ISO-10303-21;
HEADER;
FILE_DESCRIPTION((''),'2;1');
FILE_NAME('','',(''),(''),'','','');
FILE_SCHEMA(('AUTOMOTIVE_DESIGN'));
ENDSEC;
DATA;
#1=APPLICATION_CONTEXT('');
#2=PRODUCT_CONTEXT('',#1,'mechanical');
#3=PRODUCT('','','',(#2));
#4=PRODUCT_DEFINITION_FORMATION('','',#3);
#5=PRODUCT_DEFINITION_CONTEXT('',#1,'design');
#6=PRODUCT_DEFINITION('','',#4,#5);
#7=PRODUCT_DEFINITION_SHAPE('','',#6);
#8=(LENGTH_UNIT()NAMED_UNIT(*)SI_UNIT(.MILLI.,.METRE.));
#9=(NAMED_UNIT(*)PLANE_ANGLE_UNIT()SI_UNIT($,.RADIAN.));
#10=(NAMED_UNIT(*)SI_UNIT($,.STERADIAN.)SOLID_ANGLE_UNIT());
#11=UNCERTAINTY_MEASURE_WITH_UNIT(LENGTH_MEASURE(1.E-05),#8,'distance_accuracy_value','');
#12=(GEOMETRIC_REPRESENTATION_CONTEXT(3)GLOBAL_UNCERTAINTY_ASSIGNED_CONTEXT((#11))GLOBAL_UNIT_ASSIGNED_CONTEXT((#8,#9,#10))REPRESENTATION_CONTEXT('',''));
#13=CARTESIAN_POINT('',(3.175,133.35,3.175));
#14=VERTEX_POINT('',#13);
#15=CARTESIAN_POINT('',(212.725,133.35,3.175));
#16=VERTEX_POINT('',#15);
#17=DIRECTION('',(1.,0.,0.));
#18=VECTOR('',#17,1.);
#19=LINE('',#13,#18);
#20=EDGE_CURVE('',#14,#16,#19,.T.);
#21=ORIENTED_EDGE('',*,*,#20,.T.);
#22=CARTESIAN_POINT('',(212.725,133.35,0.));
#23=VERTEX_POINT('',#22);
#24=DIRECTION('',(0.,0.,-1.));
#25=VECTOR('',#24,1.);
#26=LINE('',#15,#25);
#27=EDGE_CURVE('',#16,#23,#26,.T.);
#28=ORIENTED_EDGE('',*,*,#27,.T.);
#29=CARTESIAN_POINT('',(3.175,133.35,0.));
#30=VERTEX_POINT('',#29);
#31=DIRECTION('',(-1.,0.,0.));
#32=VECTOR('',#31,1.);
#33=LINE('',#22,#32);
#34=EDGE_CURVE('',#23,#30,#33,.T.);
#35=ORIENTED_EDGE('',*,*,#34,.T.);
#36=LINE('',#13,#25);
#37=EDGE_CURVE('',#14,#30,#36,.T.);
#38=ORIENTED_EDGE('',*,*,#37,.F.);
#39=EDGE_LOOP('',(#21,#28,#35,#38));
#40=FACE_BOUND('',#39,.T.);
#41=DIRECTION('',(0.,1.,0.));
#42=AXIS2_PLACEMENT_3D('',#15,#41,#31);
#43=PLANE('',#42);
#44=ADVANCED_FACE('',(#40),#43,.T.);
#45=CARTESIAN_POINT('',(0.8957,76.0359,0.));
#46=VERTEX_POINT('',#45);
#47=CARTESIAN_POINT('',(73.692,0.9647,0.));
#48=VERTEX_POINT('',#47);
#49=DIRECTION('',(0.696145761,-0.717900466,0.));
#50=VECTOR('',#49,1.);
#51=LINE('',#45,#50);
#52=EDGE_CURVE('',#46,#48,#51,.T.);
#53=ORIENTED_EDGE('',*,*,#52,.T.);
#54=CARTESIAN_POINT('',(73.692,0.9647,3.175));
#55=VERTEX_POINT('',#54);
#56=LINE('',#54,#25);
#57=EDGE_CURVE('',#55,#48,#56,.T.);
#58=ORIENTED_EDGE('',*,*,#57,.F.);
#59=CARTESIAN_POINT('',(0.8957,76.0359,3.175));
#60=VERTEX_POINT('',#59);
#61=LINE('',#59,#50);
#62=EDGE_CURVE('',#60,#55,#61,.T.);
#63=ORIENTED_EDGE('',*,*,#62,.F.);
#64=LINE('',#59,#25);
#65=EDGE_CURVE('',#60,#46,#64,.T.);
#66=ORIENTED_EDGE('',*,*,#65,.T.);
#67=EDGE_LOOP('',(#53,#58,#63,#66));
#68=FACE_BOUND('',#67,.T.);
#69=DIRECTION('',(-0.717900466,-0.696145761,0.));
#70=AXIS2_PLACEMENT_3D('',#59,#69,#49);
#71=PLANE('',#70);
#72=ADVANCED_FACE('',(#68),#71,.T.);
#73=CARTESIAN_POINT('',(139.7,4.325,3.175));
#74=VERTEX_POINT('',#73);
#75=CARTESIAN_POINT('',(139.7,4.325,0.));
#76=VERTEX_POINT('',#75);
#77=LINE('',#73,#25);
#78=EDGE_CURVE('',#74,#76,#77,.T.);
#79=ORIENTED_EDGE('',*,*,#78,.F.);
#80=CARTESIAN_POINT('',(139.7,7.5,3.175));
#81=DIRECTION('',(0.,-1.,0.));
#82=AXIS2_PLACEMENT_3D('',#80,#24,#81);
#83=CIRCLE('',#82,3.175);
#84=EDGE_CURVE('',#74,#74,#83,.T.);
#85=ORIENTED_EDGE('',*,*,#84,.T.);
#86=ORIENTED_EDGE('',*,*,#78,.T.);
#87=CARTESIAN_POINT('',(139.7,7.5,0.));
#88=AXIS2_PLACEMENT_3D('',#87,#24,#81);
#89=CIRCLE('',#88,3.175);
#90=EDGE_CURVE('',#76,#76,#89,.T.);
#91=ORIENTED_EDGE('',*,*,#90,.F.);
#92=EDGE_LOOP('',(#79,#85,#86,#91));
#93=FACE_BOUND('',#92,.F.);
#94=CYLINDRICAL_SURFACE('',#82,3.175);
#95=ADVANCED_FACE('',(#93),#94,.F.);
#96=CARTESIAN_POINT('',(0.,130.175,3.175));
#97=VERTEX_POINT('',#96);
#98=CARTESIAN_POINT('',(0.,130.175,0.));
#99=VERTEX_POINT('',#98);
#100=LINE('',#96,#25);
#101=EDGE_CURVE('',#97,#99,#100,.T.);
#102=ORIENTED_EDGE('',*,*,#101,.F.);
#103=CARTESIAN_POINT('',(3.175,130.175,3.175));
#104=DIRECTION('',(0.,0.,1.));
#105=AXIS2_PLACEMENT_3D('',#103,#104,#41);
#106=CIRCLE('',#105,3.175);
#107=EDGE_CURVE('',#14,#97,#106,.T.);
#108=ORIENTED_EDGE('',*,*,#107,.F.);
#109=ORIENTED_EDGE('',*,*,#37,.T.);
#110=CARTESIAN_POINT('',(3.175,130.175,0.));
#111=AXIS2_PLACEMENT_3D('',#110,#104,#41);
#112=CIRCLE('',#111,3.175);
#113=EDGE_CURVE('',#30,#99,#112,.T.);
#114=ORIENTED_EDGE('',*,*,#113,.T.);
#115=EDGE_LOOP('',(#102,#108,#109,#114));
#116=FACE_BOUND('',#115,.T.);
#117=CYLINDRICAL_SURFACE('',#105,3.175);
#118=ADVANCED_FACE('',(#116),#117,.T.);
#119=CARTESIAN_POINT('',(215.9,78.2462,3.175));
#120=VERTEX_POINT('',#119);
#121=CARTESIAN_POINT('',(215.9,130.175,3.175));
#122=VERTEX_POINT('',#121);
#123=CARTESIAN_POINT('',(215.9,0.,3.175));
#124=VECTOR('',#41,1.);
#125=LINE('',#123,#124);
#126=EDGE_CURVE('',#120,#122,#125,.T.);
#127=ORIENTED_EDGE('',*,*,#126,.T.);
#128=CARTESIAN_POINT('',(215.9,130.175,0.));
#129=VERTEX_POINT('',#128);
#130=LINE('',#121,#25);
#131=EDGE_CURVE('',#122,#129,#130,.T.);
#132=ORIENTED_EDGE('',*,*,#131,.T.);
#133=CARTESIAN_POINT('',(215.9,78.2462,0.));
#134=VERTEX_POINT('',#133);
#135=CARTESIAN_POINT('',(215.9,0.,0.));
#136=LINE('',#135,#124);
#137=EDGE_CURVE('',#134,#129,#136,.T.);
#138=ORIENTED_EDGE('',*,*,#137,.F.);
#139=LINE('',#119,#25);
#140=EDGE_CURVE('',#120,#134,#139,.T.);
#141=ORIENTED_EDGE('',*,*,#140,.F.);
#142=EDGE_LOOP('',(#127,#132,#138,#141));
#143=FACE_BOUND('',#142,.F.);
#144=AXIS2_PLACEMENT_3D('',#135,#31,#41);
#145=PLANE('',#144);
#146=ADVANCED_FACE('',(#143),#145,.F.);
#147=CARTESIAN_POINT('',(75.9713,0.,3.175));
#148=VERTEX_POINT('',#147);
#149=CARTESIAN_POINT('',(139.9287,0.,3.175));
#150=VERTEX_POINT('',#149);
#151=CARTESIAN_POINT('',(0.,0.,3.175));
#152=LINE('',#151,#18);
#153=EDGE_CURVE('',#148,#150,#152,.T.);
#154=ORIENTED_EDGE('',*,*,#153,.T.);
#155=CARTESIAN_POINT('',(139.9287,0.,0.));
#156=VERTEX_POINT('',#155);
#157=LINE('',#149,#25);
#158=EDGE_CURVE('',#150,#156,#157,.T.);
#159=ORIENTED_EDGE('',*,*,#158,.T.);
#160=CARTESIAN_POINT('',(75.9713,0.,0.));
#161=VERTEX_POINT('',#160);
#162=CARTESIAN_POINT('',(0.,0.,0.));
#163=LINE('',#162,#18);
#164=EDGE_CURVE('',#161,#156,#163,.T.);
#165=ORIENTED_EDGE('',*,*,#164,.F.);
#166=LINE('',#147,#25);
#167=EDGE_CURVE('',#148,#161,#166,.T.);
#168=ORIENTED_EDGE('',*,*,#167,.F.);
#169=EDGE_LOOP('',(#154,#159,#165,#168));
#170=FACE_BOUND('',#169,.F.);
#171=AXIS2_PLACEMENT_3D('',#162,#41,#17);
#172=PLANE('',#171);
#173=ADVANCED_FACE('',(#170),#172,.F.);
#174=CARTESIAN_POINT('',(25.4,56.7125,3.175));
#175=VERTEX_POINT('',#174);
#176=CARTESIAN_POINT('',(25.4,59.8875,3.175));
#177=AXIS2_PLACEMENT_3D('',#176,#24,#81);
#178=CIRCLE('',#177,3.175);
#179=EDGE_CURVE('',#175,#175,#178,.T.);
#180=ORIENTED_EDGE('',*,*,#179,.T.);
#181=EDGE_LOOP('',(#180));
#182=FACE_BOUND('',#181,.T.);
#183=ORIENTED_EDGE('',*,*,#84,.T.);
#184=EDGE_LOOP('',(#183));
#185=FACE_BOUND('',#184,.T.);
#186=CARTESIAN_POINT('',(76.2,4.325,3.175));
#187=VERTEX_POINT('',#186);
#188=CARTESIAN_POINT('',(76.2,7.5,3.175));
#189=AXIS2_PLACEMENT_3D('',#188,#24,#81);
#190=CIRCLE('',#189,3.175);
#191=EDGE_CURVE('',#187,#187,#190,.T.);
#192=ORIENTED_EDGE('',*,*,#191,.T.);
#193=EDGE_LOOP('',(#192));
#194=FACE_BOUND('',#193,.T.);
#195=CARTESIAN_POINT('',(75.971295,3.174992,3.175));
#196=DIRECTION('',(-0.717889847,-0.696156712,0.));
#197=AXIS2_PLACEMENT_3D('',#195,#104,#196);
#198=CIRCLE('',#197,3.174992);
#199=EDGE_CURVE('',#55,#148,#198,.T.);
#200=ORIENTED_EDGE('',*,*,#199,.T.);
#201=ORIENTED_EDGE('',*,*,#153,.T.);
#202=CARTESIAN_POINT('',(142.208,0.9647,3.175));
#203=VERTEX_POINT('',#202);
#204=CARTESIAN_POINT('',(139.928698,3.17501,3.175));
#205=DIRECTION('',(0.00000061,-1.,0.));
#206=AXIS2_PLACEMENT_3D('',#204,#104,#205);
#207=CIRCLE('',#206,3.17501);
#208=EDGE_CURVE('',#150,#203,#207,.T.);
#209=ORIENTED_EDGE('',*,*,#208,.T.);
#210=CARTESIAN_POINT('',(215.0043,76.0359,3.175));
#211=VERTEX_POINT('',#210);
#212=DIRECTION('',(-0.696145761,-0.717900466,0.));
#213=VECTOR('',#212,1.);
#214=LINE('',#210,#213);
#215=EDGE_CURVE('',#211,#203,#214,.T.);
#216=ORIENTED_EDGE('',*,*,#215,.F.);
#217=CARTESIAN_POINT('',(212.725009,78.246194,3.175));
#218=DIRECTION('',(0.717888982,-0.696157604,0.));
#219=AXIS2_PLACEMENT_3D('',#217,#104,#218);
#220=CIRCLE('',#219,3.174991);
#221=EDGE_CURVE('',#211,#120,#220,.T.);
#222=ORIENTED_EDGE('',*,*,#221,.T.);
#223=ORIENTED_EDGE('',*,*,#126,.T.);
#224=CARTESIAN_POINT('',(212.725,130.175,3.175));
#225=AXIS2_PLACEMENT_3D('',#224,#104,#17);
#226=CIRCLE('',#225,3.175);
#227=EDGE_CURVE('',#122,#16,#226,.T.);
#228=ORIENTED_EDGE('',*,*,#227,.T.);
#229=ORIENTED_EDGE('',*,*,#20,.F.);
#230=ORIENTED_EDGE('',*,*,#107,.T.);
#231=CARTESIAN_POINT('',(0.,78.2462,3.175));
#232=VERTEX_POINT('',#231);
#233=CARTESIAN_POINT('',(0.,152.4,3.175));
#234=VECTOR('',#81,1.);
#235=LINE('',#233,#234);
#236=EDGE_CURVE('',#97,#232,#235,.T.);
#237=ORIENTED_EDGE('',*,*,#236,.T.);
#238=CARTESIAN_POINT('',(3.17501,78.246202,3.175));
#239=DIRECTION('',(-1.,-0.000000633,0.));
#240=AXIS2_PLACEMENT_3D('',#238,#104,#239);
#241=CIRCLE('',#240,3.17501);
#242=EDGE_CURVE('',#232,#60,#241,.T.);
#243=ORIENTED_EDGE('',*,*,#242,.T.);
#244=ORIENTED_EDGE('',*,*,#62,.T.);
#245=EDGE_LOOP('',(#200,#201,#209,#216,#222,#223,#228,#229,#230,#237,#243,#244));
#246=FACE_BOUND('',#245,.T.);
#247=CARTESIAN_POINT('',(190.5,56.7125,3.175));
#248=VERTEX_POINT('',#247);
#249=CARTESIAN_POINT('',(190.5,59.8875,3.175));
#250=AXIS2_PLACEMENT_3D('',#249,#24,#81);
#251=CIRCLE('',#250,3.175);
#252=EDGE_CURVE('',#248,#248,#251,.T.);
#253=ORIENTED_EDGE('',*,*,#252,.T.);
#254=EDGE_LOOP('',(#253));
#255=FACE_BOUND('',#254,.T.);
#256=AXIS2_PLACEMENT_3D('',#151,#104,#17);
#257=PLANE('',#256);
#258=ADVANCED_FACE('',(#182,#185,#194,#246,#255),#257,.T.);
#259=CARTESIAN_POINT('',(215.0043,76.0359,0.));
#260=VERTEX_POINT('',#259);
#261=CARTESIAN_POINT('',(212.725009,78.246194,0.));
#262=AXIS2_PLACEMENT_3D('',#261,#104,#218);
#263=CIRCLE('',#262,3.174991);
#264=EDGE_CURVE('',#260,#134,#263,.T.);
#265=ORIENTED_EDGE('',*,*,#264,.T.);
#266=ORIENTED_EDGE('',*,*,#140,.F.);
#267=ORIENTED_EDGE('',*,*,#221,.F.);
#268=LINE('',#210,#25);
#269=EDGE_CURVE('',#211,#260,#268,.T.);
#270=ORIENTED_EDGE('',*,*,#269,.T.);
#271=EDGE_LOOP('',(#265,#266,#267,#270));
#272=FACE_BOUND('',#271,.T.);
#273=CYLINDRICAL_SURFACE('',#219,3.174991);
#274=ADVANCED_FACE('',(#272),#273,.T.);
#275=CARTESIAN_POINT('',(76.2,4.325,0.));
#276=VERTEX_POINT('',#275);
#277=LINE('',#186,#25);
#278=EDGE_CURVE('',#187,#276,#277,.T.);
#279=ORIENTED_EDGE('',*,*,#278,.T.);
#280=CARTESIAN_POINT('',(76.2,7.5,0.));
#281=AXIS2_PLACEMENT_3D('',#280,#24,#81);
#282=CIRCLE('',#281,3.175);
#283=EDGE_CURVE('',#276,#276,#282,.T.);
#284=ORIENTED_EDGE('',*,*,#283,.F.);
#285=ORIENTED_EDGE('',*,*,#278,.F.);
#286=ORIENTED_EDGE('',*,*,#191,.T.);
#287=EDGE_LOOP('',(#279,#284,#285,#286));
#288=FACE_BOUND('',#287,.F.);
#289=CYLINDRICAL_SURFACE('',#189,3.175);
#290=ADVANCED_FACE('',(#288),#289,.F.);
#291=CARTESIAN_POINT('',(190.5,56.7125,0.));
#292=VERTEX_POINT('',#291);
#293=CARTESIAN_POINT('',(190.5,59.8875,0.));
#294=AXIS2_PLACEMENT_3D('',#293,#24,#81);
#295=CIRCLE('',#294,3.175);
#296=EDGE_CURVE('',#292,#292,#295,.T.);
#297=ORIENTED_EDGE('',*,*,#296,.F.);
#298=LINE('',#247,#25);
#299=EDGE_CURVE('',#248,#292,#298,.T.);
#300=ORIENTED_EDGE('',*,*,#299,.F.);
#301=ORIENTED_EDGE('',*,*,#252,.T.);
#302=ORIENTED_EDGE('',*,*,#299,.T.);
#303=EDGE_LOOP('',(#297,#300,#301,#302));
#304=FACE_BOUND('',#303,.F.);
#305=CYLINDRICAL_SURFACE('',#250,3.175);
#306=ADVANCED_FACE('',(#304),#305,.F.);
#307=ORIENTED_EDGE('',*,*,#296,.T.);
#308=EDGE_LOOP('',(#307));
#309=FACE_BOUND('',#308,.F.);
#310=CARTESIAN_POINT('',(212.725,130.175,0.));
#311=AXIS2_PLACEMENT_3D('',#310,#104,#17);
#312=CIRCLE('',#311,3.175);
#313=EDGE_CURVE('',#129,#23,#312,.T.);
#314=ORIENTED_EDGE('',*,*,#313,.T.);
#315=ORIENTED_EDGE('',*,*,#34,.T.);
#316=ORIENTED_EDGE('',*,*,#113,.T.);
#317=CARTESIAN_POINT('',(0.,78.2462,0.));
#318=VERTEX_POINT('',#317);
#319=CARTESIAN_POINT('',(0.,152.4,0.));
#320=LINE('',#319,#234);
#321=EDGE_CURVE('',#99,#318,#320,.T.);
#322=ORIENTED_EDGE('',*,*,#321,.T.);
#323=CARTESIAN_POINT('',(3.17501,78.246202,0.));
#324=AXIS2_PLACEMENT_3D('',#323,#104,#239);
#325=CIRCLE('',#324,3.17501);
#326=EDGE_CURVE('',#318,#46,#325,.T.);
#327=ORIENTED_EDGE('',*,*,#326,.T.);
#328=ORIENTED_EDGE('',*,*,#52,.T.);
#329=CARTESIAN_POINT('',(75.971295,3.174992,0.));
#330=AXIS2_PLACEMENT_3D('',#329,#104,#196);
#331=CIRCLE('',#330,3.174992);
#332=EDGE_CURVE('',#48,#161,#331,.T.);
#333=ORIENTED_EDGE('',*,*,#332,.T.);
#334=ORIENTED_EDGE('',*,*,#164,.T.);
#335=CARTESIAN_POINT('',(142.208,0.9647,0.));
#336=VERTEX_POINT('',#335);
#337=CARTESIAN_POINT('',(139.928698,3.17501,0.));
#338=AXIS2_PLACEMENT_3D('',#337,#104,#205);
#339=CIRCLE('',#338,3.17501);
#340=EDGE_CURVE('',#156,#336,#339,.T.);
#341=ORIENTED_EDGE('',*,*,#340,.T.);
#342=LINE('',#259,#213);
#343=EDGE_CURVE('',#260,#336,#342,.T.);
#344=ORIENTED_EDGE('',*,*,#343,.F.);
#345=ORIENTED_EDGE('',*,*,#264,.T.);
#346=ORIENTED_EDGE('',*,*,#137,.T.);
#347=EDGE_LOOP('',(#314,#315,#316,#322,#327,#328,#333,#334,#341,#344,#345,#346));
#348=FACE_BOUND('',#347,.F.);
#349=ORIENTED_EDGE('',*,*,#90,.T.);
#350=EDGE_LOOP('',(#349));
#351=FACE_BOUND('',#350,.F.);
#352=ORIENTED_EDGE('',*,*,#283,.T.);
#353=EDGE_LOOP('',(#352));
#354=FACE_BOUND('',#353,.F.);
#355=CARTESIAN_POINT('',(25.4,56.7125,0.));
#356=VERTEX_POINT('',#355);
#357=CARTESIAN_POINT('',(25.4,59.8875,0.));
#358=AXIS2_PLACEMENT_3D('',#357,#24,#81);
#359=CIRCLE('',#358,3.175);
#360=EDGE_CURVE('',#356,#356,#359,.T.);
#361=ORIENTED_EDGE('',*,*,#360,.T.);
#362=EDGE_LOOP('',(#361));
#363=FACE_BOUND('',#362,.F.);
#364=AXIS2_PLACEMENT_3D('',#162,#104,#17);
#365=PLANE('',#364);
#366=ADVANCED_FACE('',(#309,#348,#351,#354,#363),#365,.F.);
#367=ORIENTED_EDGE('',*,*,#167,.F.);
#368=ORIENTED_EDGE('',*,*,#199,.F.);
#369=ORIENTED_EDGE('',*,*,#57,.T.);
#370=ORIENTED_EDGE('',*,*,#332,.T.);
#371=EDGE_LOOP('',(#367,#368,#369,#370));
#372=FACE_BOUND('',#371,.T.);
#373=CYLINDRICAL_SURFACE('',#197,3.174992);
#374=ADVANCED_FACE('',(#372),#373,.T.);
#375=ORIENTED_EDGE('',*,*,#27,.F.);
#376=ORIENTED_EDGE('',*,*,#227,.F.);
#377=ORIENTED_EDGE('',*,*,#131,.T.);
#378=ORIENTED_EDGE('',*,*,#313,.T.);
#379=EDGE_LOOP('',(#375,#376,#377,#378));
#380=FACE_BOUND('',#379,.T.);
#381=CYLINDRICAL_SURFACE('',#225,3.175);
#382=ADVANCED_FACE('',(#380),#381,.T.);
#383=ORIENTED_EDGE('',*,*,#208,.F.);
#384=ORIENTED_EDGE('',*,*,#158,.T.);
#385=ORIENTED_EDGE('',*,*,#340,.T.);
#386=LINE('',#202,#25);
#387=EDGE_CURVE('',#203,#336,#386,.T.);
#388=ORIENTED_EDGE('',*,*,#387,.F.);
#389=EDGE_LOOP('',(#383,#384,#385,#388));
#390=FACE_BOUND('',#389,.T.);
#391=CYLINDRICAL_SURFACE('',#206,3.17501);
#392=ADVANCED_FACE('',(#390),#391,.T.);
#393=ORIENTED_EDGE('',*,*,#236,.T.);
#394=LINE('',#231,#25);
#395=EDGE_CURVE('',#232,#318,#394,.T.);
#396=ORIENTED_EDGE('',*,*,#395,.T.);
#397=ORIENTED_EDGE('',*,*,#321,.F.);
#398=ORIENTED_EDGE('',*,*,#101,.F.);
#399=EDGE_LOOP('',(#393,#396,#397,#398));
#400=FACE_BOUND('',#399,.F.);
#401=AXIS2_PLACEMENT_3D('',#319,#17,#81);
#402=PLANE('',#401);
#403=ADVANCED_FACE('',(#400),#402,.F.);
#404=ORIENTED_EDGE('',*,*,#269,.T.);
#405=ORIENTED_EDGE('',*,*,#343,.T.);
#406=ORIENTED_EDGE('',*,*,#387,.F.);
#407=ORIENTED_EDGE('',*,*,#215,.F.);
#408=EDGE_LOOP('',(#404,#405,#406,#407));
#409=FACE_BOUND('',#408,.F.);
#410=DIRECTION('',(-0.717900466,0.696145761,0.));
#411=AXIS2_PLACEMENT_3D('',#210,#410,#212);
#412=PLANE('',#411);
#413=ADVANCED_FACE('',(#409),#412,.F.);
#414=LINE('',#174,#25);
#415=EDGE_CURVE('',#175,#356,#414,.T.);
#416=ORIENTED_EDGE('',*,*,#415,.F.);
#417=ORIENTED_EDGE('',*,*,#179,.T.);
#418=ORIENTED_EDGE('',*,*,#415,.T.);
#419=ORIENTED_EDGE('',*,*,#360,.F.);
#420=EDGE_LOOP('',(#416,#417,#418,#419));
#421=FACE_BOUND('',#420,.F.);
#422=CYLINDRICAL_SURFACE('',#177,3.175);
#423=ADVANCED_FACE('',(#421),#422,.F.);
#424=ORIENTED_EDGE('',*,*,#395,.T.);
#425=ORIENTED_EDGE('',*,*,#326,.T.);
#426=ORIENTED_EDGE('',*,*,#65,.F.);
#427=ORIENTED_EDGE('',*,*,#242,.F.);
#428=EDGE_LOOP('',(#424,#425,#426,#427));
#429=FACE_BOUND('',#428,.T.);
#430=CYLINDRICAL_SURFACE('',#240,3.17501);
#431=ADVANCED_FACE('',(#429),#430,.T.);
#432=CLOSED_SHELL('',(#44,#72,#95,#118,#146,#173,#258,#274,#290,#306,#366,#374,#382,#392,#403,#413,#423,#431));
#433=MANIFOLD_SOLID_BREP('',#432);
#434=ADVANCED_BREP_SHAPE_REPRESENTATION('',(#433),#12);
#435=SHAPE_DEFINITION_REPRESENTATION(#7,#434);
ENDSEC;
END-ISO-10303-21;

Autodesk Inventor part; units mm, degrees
ref_plane "YZ Plane" through (0, 0, 0) normal (1, 0, 0) x (0, 1, 0)
ref_plane "XZ Plane" through (0, 0, 0) normal (0, 1, 0) x (-1, 0, 0)
ref_plane "XY Plane" through (0, 0, 0) normal (0, 0, 1) x (1, 0, 0)
sketch "Sketch1" plane through (0, 0, 0) normal (0, 0, 1) x (1, 0, 0)
  line L0 (0, 0) -> (215.9, 0)
  line L1 (215.9, 0) -> (215.9, 152.4)
  line L2 (215.9, 152.4) -> (0, 152.4)
  line L3 (0, 152.4) -> (0, 0)
  dimension "d0" = 215.9
  dimension "d1" = 152.4
extrude "Extrusion1" add sketch "Sketch1" along normal blind 3.175
sketch "Sketch2" plane through (0, 0, 3.175) normal (0, 0, 1) x (1, 0, 0)
  line L0 (215.9, 152.4) -> (0, 152.4) construction
  line L1 (107.95, 152.4) -> (107.95, 0) construction
  line L2 (0, 0) -> (215.9, 0) projected
  point P0 (25.4, 59.8875)
  point P1 (76.2, 7.5)
  point P2 (190.5, 59.8875)
  point P3 (139.7, 7.5)
  dimension "d5" = 31.75
  dimension "d7" = 82.55
  dimension "d9" = 52.3875
  dimension "d10" = 7.5
hole "Hole1" at (25.4, 59.8875, 3.175) at (76.2, 7.5, 3.175) at (190.5, 59.8875, 3.175) at (139.7, 7.5, 3.175) direction (0, 0, -1) diameter 6.35 end through all
sketch "Sketch3" plane through (0, 0, 3.175) normal (0, 0, 1) x (1, 0, 0)
  line L0 (215.9, 152.4) -> (0, 152.4) projected
  line L1 (107.95, 152.4) -> (107.95, 0)
  line L2 (0, 0) -> (215.9, 0) projected
  circle A0 centre (25.4, 59.8875) radius 3.175 projected
  circle A1 centre (76.2, 7.5) radius 3.175 projected
  line L3 (25.4, 59.8875) -> (76.2, 7.5) construction
  line L4 (0.8957, 76.0359) -> (73.692, 0.9647)
  line L5 (0, 152.4) -> (0, 0) projected
  line L6 (0, 130.175) -> (0, 78.2462)
  line L7 (3.175, 133.35) -> (107.95, 133.35)
  line L8 (0, 133.35) -> (0, 125.3708)
  circle A2 centre (190.5, 59.8875) radius 3.175
  circle A3 centre (139.7, 7.5) radius 3.175
  line L9 (190.5, 59.8875) -> (139.7, 7.5) construction
  line L10 (215.0043, 76.0359) -> (142.208, 0.9647)
  line L11 (215.9, 152.4) -> (215.9, 78.2462)
  line L12 (215.9, 133.35) -> (215.9, 76.9596)
  line L13 (212.725, 133.35) -> (107.95, 133.35)
  line L14 (215.9, 130.175) -> (215.9, 125.3708)
  arc A4 (3.175, 133.35) -> (0, 130.175) centre (3.175, 130.175) ccw
  arc A5 (0, 78.2462) -> (0.8957, 76.0359) centre (3.175, 78.2462) ccw
  line L15 (75.9713, 0) -> (107.95, 0)
  line L16 (139.9287, 0) -> (107.95, 0)
  arc A6 (73.692, 0.9647) -> (75.9713, 0) centre (75.9713, 3.175) ccw
  arc A7 (139.9287, 0) -> (142.208, 0.9647) centre (139.9287, 3.175) ccw
  arc A8 (215.0043, 76.0359) -> (215.9, 78.2462) centre (212.725, 78.2462) ccw
  arc A9 (215.9, 130.175) -> (212.725, 133.35) centre (212.725, 130.175) ccw
  line L17 (215.9, 0) -> (215.9, 152.4) projected
  point P0 (74.6275, 0)
  point P1 (0, 76.9596)
  point P2 (77.9849, 0)
  dimension "d19" = 6.35
  dimension "d20" = 19.05
  dimension "d21" = 3.175
  dimension "d22" = 3.175
  dimension "d23" = 3.175
  dimension "d27" = 31.9787
  dimension "d28" = 31.9787
extrude "Extrusion2" cut sketch "Sketch3" against normal blind 3.175 contours L11 A9 L13 L1 L0 | L1 L7 A4 L5 L0 | L2 L5 A5 L4 A6 | A7 L10 A8 L12 L17 L2
sketch "Sketch4" plane through (0, 0, 3.175) normal (0, 0, 1) x (1, 0, 0)
  circle A0 centre (76.2059, 20.2) radius 3.175
  circle A1 centre (76.2, 7.5) radius 3.175 projected
  line L0 (73.0309, 20.2015) -> (73.0254, 7.4505)
  circle A2 centre (76.2, 7.5) radius 3.175 projected
  line L1 (79.3809, 20.2) -> (79.375, 7.4971)
  line L2 (3.175, 133.35) -> (212.725, 133.35) projected
  line L3 (107.95, 133.35) -> (107.95, 0) construction
  line L4 (75.9713, 0) -> (139.9287, 0) projected
  circle A3 centre (139.6941, 20.2) radius 3.175
  line L5 (142.8691, 20.2015) -> (142.8746, 7.4505)
  line L6 (136.5191, 20.2) -> (136.525, 7.5)
  circle A4 centre (76.2, 7.5) radius 3.175
  circle A5 centre (139.7, 7.5) radius 3.175 projected
  circle A6 centre (139.7, 7.5) radius 3.175
  point P0 (0, 0)
  point P1 (136.525, 7.4971)
  dimension "d29" = 6.35
  dimension "d30" = 12.7
equation "\"d28\" = d27"
properties part number "new pulley plate"
